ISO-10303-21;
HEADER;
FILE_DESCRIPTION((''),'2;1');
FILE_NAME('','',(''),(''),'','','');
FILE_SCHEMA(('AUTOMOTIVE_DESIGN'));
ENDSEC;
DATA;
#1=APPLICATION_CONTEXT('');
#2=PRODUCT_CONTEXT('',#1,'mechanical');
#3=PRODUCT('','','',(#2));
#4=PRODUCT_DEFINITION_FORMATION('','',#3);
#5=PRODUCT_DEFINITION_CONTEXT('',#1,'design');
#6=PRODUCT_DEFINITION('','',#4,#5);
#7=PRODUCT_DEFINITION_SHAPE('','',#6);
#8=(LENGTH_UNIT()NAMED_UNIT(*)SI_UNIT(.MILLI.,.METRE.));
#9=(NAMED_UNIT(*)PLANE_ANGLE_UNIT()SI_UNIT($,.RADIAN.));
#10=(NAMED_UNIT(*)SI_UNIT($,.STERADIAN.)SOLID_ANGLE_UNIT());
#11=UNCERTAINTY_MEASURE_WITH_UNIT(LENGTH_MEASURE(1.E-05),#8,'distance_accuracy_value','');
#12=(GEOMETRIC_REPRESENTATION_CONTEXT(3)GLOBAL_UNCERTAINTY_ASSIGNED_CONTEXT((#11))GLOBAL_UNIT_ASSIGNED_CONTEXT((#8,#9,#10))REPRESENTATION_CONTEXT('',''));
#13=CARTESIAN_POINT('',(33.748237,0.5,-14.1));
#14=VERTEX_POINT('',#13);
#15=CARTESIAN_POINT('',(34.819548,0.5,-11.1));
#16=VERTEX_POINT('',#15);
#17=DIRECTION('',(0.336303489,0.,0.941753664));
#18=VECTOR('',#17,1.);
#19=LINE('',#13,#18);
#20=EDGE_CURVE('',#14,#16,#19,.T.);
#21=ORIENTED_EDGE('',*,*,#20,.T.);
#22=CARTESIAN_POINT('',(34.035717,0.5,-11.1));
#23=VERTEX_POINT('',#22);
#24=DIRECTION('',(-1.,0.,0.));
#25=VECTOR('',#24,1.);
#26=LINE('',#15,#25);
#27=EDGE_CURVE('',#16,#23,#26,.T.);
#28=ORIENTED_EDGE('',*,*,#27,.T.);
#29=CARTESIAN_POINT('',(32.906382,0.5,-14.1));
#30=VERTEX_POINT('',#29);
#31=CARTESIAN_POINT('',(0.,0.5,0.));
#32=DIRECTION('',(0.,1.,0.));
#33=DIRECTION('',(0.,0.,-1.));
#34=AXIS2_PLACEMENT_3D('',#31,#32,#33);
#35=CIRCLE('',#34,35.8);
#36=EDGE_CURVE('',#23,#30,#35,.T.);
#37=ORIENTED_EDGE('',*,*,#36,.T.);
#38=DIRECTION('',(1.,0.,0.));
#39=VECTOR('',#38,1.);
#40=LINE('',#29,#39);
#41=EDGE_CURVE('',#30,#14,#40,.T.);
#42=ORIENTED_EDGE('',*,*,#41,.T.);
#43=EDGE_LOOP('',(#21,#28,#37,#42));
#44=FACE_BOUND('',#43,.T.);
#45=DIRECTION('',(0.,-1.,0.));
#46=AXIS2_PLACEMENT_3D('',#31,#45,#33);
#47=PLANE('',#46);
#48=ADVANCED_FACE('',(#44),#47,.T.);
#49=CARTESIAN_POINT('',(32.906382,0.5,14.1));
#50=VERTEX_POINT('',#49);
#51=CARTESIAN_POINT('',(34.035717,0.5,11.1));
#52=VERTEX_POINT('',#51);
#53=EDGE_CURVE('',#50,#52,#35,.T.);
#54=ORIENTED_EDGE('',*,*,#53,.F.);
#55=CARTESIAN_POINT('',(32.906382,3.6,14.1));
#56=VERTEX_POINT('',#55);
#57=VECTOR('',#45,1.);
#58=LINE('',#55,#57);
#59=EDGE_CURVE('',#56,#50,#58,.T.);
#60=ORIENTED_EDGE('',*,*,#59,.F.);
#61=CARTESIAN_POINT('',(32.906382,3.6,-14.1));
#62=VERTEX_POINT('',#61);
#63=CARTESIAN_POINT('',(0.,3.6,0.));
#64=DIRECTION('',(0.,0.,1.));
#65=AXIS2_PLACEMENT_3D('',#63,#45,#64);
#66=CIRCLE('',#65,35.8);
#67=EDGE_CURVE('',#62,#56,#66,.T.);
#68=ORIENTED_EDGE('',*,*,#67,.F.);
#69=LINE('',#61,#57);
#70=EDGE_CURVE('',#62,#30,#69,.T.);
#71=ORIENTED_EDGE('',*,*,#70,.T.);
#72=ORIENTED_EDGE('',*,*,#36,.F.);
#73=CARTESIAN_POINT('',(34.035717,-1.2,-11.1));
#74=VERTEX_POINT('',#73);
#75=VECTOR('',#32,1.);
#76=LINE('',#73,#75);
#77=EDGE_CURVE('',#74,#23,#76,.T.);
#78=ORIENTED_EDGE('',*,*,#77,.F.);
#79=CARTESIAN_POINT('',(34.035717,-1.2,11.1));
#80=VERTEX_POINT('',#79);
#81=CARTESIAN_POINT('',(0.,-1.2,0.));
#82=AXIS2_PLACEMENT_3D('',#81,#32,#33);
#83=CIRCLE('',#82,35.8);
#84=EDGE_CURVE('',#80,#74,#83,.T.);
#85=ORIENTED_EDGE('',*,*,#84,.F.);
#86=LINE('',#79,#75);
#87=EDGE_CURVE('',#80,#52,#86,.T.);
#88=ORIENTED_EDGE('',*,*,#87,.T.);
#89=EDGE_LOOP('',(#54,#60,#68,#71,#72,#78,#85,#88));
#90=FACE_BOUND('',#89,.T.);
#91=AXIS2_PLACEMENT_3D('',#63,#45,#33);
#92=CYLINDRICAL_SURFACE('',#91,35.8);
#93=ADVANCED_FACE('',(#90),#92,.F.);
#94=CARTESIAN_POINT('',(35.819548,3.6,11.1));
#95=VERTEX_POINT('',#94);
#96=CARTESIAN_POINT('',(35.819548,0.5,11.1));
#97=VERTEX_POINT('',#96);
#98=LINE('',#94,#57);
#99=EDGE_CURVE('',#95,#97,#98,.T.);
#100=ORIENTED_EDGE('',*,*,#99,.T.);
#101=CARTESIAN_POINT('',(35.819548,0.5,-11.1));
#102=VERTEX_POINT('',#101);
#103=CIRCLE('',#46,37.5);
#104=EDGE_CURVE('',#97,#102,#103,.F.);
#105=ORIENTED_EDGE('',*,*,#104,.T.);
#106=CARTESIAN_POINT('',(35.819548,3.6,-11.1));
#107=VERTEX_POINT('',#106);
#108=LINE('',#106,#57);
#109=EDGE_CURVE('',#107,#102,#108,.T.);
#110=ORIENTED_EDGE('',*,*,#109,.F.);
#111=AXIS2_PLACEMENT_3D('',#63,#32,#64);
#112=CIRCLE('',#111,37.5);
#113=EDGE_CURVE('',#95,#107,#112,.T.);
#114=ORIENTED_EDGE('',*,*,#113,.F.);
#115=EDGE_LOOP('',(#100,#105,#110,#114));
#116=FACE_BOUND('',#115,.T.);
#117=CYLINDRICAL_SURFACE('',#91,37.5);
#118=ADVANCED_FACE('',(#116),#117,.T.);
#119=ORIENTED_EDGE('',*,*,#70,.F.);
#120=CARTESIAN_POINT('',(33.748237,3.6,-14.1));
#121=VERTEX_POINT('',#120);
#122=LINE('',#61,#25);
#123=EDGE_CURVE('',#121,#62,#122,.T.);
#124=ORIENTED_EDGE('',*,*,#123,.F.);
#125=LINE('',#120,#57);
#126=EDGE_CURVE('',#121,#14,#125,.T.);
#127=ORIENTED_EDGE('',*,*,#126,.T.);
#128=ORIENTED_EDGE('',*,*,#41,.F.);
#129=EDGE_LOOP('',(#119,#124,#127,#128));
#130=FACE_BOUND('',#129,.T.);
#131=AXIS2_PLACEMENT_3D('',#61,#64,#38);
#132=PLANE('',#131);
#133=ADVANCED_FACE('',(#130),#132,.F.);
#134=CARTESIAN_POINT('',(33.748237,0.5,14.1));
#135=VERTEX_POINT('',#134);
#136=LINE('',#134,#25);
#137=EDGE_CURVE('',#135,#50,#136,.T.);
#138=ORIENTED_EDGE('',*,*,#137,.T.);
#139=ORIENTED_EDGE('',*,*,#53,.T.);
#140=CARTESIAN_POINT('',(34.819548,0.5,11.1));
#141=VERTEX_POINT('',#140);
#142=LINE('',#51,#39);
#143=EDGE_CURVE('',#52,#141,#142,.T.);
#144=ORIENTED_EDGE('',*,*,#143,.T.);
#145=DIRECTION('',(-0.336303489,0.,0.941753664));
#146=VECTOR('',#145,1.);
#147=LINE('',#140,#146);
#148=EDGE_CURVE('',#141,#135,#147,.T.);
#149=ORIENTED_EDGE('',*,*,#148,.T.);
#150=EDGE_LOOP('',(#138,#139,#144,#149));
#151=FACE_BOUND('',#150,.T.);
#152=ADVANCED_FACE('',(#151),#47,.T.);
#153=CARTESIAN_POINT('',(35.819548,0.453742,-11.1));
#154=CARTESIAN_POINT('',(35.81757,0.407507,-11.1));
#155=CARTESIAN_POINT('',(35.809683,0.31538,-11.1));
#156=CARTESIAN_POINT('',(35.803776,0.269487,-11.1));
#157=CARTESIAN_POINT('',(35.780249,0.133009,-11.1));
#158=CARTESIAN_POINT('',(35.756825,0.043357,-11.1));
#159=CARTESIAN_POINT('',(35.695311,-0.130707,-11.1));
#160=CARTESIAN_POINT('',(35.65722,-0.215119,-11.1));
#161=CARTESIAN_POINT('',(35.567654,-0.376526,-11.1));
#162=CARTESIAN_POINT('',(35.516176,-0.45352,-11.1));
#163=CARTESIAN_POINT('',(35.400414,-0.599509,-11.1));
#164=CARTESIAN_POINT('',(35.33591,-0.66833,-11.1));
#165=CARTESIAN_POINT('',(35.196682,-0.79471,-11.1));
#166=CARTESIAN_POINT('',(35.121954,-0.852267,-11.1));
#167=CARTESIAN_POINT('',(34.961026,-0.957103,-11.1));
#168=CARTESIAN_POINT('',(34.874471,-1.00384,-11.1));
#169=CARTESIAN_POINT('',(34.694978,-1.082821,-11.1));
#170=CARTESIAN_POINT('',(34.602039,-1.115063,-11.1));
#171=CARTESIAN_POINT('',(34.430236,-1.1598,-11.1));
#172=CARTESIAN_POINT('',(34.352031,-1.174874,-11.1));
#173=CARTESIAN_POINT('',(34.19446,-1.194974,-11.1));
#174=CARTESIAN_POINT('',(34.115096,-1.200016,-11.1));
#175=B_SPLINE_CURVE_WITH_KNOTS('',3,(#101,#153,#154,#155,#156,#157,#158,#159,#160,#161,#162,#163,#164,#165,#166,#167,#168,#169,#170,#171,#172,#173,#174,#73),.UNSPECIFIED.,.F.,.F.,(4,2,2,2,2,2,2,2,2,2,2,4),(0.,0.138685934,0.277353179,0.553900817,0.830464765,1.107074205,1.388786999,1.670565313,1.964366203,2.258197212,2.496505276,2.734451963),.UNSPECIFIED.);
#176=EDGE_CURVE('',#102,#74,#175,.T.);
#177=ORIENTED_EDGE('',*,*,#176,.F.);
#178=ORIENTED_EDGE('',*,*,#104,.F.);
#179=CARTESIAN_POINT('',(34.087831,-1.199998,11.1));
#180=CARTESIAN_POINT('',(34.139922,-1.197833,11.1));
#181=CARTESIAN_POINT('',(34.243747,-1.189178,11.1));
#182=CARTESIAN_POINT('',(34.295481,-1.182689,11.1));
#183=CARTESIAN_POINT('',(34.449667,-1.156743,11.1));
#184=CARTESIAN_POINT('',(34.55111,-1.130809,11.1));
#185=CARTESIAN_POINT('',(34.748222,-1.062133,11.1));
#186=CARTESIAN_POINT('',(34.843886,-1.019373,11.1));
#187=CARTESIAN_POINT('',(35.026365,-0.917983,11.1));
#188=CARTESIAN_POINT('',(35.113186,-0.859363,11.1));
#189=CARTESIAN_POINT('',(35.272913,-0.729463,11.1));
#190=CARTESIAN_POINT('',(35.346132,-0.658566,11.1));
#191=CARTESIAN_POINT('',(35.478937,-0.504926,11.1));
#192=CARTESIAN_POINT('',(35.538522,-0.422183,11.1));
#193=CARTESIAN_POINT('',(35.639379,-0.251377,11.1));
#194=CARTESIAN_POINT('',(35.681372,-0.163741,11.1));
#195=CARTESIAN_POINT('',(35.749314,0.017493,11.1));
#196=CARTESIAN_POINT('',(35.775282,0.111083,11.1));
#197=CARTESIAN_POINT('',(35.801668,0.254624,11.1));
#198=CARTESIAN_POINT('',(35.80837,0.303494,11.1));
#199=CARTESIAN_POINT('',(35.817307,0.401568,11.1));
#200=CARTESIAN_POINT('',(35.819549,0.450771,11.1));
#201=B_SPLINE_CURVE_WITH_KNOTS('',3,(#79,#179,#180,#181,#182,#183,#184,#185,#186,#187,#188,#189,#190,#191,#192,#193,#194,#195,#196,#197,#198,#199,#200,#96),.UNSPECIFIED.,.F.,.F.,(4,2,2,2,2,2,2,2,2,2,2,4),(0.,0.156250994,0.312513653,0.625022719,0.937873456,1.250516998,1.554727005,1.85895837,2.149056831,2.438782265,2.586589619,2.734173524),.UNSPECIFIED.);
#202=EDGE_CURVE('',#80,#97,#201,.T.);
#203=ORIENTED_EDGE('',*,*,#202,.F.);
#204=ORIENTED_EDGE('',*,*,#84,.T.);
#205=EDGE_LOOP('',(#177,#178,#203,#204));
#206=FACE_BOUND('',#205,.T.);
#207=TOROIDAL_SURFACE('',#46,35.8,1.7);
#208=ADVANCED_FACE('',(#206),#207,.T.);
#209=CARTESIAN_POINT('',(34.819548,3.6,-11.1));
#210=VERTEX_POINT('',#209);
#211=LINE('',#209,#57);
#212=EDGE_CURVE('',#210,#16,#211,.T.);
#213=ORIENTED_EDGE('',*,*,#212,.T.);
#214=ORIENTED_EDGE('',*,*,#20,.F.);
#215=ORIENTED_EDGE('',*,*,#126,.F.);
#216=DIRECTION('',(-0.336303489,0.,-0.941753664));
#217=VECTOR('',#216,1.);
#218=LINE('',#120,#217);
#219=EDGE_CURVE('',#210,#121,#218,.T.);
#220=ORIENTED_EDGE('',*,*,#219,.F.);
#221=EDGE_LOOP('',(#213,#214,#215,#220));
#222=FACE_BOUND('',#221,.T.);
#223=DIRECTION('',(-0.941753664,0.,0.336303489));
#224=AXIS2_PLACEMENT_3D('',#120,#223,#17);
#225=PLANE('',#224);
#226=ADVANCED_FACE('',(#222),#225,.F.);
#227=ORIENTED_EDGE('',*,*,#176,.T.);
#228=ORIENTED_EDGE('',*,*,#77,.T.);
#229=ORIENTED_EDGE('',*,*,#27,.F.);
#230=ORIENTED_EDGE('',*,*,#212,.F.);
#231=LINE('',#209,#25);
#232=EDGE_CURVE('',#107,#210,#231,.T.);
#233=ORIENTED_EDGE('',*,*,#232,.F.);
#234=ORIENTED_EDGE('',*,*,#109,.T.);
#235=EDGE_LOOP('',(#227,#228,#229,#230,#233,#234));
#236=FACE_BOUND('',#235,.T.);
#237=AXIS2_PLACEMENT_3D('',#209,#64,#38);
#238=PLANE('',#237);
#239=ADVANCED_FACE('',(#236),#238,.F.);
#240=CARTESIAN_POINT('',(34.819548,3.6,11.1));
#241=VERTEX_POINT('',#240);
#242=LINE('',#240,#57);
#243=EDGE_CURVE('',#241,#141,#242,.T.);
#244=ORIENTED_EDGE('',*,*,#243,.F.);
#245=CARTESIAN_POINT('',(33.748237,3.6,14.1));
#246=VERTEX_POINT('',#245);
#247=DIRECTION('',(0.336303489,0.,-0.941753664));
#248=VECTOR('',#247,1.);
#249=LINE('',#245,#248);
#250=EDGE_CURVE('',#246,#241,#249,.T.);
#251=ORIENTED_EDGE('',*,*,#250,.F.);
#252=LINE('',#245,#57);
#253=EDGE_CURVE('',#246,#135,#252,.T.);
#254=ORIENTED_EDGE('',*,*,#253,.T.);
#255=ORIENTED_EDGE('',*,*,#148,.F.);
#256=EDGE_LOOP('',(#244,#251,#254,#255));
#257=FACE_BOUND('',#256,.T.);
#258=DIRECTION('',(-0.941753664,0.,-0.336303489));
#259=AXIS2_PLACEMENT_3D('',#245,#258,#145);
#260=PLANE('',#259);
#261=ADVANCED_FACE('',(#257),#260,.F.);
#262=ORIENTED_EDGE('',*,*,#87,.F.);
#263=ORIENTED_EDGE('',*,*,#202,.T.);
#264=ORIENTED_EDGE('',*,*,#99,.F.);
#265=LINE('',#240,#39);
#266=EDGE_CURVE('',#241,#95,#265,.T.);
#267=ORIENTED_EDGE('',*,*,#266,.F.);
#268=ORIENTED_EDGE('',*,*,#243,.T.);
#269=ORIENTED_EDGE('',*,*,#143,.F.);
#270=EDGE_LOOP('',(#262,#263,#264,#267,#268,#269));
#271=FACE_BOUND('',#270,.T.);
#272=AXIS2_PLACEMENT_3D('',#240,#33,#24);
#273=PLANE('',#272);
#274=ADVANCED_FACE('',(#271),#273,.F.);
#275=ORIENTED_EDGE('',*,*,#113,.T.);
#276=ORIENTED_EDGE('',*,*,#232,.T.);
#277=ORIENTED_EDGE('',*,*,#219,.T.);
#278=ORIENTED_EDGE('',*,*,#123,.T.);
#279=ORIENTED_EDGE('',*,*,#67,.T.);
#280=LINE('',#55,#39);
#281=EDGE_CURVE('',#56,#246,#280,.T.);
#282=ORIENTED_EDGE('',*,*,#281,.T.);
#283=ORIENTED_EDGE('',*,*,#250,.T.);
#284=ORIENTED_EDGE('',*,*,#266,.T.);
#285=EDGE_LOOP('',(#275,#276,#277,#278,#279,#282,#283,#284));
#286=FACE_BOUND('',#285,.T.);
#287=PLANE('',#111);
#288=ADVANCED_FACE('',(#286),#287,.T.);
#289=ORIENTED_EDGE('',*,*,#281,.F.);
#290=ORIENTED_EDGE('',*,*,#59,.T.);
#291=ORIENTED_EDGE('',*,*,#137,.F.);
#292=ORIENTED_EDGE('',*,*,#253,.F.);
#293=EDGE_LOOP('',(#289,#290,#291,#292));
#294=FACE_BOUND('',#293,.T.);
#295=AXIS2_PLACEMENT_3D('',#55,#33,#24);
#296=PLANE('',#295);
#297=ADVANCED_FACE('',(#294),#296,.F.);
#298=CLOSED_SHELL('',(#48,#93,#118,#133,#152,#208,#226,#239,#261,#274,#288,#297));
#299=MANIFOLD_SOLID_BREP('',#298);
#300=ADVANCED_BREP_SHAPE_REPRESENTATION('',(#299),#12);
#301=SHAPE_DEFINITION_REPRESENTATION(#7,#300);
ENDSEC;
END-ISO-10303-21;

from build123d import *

# Parameters (mm, degrees)
BOSS_EXTRUDE1_DEPTH = 3.6
BOSS_EXTRUDE2_START = 1.2
BOSS_EXTRUDE2_DEPTH = 1.2
FILLET1_R           = 1.7
CUT_EXTRUDE1_DEPTH  = 0.5


with BuildPart() as part:
    # Sketch1 → Boss-Extrude1 (new body)
    with BuildSketch(Plane(origin=(0, 0, 0), x_dir=(1, 0, 0), z_dir=(0, 1, 0))):
        with BuildLine():
            Line((34.819547736, 11.1), (35.819547736, 11.1))
            ThreePointArc((35.819547736, 11.1), (37.5, 0), (35.819547736, -11.1))
            Line((35.819547736, -11.1), (34.819547736, -11.1))
            Line((34.819547736, -11.1), (33.748237365, -14.1))
            Line((33.748237365, -14.1), (32.90638236, -14.1))
            ThreePointArc((32.90638236, -14.1), (35.8, 0), (32.90638236, 14.1))
            Line((32.90638236, 14.1), (33.748237365, 14.1))
            Line((33.748237365, 14.1), (34.819547736, 11.1))
        make_face()
    extrude(amount=BOSS_EXTRUDE1_DEPTH)

    # Sketch2 → Boss-Extrude2 (add)
    with BuildSketch(Plane.XZ.offset(BOSS_EXTRUDE2_START)):
        with BuildLine():
            Line((35.819547736, 11.1), (34.035716534, 11.1))
            ThreePointArc((34.035716534, 11.1), (35.8, 0), (34.035716534, -11.1))
            Line((34.035716534, -11.1), (35.819547736, -11.1))
            ThreePointArc((35.819547736, -11.1), (37.5, 0), (35.819547736, 11.1))
        make_face()
    extrude(amount=-BOSS_EXTRUDE2_DEPTH)

    # Fillet1
    fillet1_edges = [part.edges().sort_by_distance(p)[0] for p in [
        (37.5, -1.2, 0),
    ]]
    fillet(fillet1_edges, radius=FILLET1_R - 0.0001)  # a hair under: the kernel refuses the full size

    # Sketch5 → Cut-Extrude1 (cut)
    with BuildSketch(Plane.XZ):
        with BuildLine():
            Line((34.819547736, -11.1), (34.035716534, -11.1))
            ThreePointArc((34.035716534, -11.1), (33.504643724, -12.612646388), (32.90638236, -14.1))
            Line((32.90638236, -14.1), (33.748237365, -14.1))
            Line((33.748237365, -14.1), (34.819547736, -11.1))
        make_face()
        with BuildLine():
            Line((34.035716534, 11.1), (34.819547736, 11.1))
            Line((34.819547736, 11.1), (33.748237365, 14.1))
            Line((33.748237365, 14.1), (32.90638236, 14.1))
            ThreePointArc((32.90638236, 14.1), (33.504643724, 12.612646388), (34.035716534, 11.1))
        make_face()
    extrude(amount=-CUT_EXTRUDE1_DEPTH, mode=Mode.SUBTRACT)


solid = part.part
